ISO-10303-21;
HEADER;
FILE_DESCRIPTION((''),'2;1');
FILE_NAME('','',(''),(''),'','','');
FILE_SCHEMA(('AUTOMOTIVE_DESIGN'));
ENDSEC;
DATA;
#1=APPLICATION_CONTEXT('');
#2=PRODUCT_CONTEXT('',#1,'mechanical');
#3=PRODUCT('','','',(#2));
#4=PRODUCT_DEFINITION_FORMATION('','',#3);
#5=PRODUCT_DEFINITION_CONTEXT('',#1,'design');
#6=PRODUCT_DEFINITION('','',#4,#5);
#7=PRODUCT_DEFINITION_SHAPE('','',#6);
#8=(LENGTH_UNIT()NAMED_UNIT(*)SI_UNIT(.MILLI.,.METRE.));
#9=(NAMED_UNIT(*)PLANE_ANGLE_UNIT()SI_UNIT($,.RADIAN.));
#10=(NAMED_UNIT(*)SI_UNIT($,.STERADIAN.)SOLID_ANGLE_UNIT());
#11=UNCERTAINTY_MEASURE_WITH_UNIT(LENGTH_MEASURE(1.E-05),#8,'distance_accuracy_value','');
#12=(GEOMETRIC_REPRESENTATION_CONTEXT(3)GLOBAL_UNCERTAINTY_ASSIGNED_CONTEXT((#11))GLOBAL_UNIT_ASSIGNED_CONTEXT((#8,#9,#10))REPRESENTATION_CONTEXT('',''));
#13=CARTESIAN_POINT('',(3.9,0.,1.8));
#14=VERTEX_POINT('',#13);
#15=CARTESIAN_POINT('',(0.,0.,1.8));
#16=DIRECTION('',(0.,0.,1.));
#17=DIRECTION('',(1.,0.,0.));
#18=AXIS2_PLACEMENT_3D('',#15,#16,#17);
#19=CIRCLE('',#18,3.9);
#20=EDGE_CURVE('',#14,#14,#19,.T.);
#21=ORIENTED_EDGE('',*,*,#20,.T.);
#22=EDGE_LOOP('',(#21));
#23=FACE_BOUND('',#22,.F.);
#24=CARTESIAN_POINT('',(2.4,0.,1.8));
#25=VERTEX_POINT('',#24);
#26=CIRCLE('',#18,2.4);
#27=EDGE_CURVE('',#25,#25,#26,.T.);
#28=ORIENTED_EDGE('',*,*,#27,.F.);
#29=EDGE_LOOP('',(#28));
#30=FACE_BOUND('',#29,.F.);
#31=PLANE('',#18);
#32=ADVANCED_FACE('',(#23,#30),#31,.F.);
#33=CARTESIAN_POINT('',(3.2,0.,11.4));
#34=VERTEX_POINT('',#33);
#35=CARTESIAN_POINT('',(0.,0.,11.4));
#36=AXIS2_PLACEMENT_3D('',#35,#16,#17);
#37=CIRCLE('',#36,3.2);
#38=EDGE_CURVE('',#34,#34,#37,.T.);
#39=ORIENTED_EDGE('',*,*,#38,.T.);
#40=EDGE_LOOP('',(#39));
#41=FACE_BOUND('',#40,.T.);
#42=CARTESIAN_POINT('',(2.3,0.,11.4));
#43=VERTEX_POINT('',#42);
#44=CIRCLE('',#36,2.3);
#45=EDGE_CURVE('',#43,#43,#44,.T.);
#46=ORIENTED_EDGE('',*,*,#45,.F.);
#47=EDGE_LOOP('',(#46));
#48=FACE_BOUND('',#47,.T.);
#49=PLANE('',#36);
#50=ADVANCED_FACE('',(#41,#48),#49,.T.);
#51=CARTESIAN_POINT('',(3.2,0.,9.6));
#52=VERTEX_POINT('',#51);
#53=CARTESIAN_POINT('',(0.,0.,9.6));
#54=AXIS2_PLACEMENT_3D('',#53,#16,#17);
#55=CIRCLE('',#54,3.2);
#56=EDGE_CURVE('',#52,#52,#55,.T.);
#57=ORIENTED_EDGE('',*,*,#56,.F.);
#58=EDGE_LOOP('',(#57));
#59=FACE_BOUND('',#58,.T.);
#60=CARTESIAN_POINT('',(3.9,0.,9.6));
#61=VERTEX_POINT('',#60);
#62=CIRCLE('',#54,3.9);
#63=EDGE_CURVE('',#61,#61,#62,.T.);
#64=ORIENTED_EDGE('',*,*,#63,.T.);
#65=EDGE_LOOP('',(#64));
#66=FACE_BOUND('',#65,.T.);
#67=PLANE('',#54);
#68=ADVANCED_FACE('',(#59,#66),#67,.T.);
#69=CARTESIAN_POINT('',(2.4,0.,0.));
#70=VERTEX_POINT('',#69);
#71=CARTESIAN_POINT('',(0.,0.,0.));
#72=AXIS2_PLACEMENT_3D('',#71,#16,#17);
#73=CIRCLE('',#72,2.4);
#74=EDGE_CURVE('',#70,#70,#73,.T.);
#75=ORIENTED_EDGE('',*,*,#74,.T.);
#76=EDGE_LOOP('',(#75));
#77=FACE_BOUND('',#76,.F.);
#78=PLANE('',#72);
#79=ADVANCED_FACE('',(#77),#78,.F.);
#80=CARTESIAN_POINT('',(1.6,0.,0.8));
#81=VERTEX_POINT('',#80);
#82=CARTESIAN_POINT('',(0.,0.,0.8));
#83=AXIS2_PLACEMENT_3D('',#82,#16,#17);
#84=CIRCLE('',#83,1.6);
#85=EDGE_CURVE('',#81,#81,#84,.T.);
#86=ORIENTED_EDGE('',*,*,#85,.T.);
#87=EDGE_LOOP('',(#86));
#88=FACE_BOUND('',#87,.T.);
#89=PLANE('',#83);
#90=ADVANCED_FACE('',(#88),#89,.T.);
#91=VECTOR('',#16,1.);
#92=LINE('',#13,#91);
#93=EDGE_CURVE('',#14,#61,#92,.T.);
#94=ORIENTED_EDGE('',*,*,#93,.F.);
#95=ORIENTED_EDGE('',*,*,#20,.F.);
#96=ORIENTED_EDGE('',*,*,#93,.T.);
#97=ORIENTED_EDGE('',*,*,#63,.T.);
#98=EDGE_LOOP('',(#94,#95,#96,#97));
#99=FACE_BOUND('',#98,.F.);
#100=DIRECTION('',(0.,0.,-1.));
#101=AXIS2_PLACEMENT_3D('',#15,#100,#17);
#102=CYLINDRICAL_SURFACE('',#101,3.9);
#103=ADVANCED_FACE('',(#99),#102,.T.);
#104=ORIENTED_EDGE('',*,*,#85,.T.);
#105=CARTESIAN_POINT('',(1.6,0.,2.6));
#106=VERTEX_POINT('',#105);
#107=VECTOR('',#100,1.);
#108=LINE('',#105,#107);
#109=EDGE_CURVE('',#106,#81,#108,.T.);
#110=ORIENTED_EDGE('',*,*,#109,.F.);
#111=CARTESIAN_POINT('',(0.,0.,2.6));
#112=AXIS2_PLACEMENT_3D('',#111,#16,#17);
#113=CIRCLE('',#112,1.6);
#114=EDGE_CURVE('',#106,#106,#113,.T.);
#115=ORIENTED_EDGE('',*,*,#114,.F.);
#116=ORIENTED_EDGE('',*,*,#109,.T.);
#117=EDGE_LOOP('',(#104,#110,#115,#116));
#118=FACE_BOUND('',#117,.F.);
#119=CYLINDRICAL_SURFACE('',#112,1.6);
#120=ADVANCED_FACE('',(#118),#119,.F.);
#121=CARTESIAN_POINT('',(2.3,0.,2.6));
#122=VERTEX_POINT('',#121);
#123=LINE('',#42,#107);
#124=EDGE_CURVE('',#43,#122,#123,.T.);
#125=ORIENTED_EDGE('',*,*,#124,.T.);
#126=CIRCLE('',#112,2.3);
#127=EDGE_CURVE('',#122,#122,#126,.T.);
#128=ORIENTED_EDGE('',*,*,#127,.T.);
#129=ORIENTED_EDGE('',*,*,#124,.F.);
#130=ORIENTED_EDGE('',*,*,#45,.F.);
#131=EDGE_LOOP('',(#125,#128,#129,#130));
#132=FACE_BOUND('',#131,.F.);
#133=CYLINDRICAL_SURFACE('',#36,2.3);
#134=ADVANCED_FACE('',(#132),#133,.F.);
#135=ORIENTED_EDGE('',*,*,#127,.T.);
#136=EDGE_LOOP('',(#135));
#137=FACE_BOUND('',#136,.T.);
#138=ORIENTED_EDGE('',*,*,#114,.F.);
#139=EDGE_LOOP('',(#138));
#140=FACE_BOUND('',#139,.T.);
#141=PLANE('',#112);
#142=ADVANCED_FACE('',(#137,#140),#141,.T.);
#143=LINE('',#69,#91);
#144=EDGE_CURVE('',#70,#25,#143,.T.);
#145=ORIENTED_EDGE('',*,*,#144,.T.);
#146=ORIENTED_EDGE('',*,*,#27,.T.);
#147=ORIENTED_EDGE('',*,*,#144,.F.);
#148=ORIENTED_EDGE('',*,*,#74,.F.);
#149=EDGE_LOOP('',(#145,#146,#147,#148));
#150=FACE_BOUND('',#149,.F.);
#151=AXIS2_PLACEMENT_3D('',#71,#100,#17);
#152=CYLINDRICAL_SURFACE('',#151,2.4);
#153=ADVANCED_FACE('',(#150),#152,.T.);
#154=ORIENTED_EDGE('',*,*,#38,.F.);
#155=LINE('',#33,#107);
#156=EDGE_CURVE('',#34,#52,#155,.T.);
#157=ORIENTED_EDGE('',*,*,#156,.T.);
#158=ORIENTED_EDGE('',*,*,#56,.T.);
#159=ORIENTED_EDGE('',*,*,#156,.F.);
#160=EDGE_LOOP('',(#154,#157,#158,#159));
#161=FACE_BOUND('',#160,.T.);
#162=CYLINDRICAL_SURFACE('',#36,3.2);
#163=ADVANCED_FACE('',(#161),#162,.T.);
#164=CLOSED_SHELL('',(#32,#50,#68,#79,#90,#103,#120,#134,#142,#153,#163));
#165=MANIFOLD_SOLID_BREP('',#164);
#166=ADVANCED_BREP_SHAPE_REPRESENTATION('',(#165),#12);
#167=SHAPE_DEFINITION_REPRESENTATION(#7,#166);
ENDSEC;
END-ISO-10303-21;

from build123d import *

# Parameters (mm, degrees)
F0_R     = 2.4
F1_DEPTH = 1.8
F2_R     = 3.9
F2_R_2   = 2.4
F3_DEPTH = 9.6
F4_R     = 3.9
F4_R_2   = 3.2
F5_DEPTH = 1.8
F6_R     = 2.3
F7_DEPTH = 8.8
F8_R     = 1.6
F9_DEPTH = 1.8


# Not quite as in the source:
# - a feature names something its author has since deleted; it is built from what else it names


with BuildPart() as f1:
    # F0 (on Top) → F1 (new body)
    with BuildSketch(Plane.XY):
        Circle(F0_R)
    extrude(amount=F1_DEPTH)

    # F2 (on face) → F3 (join)
    with BuildSketch(Plane.XY.offset(1.8)):
        Circle(F2_R)
        Circle(F2_R_2, mode=Mode.SUBTRACT)
        Circle(F2_R_2)
    extrude(amount=F3_DEPTH)

    # F4 (on face) → F5 (cut)
    with BuildSketch(Plane.XY.offset(11.4)):
        Circle(F4_R)
        Circle(F4_R_2, mode=Mode.SUBTRACT)
    extrude(amount=-F5_DEPTH, mode=Mode.SUBTRACT)

    # F6 (on face) → F7 (cut)
    with BuildSketch(Plane.XY.offset(11.4)):
        Circle(F6_R)
    extrude(amount=-F7_DEPTH, mode=Mode.SUBTRACT)

    # F8 (on face) → F9 (cut)
    with BuildSketch(Plane.XY.offset(2.6)):
        Circle(F8_R)
    extrude(amount=-F9_DEPTH, mode=Mode.SUBTRACT)


solid = f1.part
